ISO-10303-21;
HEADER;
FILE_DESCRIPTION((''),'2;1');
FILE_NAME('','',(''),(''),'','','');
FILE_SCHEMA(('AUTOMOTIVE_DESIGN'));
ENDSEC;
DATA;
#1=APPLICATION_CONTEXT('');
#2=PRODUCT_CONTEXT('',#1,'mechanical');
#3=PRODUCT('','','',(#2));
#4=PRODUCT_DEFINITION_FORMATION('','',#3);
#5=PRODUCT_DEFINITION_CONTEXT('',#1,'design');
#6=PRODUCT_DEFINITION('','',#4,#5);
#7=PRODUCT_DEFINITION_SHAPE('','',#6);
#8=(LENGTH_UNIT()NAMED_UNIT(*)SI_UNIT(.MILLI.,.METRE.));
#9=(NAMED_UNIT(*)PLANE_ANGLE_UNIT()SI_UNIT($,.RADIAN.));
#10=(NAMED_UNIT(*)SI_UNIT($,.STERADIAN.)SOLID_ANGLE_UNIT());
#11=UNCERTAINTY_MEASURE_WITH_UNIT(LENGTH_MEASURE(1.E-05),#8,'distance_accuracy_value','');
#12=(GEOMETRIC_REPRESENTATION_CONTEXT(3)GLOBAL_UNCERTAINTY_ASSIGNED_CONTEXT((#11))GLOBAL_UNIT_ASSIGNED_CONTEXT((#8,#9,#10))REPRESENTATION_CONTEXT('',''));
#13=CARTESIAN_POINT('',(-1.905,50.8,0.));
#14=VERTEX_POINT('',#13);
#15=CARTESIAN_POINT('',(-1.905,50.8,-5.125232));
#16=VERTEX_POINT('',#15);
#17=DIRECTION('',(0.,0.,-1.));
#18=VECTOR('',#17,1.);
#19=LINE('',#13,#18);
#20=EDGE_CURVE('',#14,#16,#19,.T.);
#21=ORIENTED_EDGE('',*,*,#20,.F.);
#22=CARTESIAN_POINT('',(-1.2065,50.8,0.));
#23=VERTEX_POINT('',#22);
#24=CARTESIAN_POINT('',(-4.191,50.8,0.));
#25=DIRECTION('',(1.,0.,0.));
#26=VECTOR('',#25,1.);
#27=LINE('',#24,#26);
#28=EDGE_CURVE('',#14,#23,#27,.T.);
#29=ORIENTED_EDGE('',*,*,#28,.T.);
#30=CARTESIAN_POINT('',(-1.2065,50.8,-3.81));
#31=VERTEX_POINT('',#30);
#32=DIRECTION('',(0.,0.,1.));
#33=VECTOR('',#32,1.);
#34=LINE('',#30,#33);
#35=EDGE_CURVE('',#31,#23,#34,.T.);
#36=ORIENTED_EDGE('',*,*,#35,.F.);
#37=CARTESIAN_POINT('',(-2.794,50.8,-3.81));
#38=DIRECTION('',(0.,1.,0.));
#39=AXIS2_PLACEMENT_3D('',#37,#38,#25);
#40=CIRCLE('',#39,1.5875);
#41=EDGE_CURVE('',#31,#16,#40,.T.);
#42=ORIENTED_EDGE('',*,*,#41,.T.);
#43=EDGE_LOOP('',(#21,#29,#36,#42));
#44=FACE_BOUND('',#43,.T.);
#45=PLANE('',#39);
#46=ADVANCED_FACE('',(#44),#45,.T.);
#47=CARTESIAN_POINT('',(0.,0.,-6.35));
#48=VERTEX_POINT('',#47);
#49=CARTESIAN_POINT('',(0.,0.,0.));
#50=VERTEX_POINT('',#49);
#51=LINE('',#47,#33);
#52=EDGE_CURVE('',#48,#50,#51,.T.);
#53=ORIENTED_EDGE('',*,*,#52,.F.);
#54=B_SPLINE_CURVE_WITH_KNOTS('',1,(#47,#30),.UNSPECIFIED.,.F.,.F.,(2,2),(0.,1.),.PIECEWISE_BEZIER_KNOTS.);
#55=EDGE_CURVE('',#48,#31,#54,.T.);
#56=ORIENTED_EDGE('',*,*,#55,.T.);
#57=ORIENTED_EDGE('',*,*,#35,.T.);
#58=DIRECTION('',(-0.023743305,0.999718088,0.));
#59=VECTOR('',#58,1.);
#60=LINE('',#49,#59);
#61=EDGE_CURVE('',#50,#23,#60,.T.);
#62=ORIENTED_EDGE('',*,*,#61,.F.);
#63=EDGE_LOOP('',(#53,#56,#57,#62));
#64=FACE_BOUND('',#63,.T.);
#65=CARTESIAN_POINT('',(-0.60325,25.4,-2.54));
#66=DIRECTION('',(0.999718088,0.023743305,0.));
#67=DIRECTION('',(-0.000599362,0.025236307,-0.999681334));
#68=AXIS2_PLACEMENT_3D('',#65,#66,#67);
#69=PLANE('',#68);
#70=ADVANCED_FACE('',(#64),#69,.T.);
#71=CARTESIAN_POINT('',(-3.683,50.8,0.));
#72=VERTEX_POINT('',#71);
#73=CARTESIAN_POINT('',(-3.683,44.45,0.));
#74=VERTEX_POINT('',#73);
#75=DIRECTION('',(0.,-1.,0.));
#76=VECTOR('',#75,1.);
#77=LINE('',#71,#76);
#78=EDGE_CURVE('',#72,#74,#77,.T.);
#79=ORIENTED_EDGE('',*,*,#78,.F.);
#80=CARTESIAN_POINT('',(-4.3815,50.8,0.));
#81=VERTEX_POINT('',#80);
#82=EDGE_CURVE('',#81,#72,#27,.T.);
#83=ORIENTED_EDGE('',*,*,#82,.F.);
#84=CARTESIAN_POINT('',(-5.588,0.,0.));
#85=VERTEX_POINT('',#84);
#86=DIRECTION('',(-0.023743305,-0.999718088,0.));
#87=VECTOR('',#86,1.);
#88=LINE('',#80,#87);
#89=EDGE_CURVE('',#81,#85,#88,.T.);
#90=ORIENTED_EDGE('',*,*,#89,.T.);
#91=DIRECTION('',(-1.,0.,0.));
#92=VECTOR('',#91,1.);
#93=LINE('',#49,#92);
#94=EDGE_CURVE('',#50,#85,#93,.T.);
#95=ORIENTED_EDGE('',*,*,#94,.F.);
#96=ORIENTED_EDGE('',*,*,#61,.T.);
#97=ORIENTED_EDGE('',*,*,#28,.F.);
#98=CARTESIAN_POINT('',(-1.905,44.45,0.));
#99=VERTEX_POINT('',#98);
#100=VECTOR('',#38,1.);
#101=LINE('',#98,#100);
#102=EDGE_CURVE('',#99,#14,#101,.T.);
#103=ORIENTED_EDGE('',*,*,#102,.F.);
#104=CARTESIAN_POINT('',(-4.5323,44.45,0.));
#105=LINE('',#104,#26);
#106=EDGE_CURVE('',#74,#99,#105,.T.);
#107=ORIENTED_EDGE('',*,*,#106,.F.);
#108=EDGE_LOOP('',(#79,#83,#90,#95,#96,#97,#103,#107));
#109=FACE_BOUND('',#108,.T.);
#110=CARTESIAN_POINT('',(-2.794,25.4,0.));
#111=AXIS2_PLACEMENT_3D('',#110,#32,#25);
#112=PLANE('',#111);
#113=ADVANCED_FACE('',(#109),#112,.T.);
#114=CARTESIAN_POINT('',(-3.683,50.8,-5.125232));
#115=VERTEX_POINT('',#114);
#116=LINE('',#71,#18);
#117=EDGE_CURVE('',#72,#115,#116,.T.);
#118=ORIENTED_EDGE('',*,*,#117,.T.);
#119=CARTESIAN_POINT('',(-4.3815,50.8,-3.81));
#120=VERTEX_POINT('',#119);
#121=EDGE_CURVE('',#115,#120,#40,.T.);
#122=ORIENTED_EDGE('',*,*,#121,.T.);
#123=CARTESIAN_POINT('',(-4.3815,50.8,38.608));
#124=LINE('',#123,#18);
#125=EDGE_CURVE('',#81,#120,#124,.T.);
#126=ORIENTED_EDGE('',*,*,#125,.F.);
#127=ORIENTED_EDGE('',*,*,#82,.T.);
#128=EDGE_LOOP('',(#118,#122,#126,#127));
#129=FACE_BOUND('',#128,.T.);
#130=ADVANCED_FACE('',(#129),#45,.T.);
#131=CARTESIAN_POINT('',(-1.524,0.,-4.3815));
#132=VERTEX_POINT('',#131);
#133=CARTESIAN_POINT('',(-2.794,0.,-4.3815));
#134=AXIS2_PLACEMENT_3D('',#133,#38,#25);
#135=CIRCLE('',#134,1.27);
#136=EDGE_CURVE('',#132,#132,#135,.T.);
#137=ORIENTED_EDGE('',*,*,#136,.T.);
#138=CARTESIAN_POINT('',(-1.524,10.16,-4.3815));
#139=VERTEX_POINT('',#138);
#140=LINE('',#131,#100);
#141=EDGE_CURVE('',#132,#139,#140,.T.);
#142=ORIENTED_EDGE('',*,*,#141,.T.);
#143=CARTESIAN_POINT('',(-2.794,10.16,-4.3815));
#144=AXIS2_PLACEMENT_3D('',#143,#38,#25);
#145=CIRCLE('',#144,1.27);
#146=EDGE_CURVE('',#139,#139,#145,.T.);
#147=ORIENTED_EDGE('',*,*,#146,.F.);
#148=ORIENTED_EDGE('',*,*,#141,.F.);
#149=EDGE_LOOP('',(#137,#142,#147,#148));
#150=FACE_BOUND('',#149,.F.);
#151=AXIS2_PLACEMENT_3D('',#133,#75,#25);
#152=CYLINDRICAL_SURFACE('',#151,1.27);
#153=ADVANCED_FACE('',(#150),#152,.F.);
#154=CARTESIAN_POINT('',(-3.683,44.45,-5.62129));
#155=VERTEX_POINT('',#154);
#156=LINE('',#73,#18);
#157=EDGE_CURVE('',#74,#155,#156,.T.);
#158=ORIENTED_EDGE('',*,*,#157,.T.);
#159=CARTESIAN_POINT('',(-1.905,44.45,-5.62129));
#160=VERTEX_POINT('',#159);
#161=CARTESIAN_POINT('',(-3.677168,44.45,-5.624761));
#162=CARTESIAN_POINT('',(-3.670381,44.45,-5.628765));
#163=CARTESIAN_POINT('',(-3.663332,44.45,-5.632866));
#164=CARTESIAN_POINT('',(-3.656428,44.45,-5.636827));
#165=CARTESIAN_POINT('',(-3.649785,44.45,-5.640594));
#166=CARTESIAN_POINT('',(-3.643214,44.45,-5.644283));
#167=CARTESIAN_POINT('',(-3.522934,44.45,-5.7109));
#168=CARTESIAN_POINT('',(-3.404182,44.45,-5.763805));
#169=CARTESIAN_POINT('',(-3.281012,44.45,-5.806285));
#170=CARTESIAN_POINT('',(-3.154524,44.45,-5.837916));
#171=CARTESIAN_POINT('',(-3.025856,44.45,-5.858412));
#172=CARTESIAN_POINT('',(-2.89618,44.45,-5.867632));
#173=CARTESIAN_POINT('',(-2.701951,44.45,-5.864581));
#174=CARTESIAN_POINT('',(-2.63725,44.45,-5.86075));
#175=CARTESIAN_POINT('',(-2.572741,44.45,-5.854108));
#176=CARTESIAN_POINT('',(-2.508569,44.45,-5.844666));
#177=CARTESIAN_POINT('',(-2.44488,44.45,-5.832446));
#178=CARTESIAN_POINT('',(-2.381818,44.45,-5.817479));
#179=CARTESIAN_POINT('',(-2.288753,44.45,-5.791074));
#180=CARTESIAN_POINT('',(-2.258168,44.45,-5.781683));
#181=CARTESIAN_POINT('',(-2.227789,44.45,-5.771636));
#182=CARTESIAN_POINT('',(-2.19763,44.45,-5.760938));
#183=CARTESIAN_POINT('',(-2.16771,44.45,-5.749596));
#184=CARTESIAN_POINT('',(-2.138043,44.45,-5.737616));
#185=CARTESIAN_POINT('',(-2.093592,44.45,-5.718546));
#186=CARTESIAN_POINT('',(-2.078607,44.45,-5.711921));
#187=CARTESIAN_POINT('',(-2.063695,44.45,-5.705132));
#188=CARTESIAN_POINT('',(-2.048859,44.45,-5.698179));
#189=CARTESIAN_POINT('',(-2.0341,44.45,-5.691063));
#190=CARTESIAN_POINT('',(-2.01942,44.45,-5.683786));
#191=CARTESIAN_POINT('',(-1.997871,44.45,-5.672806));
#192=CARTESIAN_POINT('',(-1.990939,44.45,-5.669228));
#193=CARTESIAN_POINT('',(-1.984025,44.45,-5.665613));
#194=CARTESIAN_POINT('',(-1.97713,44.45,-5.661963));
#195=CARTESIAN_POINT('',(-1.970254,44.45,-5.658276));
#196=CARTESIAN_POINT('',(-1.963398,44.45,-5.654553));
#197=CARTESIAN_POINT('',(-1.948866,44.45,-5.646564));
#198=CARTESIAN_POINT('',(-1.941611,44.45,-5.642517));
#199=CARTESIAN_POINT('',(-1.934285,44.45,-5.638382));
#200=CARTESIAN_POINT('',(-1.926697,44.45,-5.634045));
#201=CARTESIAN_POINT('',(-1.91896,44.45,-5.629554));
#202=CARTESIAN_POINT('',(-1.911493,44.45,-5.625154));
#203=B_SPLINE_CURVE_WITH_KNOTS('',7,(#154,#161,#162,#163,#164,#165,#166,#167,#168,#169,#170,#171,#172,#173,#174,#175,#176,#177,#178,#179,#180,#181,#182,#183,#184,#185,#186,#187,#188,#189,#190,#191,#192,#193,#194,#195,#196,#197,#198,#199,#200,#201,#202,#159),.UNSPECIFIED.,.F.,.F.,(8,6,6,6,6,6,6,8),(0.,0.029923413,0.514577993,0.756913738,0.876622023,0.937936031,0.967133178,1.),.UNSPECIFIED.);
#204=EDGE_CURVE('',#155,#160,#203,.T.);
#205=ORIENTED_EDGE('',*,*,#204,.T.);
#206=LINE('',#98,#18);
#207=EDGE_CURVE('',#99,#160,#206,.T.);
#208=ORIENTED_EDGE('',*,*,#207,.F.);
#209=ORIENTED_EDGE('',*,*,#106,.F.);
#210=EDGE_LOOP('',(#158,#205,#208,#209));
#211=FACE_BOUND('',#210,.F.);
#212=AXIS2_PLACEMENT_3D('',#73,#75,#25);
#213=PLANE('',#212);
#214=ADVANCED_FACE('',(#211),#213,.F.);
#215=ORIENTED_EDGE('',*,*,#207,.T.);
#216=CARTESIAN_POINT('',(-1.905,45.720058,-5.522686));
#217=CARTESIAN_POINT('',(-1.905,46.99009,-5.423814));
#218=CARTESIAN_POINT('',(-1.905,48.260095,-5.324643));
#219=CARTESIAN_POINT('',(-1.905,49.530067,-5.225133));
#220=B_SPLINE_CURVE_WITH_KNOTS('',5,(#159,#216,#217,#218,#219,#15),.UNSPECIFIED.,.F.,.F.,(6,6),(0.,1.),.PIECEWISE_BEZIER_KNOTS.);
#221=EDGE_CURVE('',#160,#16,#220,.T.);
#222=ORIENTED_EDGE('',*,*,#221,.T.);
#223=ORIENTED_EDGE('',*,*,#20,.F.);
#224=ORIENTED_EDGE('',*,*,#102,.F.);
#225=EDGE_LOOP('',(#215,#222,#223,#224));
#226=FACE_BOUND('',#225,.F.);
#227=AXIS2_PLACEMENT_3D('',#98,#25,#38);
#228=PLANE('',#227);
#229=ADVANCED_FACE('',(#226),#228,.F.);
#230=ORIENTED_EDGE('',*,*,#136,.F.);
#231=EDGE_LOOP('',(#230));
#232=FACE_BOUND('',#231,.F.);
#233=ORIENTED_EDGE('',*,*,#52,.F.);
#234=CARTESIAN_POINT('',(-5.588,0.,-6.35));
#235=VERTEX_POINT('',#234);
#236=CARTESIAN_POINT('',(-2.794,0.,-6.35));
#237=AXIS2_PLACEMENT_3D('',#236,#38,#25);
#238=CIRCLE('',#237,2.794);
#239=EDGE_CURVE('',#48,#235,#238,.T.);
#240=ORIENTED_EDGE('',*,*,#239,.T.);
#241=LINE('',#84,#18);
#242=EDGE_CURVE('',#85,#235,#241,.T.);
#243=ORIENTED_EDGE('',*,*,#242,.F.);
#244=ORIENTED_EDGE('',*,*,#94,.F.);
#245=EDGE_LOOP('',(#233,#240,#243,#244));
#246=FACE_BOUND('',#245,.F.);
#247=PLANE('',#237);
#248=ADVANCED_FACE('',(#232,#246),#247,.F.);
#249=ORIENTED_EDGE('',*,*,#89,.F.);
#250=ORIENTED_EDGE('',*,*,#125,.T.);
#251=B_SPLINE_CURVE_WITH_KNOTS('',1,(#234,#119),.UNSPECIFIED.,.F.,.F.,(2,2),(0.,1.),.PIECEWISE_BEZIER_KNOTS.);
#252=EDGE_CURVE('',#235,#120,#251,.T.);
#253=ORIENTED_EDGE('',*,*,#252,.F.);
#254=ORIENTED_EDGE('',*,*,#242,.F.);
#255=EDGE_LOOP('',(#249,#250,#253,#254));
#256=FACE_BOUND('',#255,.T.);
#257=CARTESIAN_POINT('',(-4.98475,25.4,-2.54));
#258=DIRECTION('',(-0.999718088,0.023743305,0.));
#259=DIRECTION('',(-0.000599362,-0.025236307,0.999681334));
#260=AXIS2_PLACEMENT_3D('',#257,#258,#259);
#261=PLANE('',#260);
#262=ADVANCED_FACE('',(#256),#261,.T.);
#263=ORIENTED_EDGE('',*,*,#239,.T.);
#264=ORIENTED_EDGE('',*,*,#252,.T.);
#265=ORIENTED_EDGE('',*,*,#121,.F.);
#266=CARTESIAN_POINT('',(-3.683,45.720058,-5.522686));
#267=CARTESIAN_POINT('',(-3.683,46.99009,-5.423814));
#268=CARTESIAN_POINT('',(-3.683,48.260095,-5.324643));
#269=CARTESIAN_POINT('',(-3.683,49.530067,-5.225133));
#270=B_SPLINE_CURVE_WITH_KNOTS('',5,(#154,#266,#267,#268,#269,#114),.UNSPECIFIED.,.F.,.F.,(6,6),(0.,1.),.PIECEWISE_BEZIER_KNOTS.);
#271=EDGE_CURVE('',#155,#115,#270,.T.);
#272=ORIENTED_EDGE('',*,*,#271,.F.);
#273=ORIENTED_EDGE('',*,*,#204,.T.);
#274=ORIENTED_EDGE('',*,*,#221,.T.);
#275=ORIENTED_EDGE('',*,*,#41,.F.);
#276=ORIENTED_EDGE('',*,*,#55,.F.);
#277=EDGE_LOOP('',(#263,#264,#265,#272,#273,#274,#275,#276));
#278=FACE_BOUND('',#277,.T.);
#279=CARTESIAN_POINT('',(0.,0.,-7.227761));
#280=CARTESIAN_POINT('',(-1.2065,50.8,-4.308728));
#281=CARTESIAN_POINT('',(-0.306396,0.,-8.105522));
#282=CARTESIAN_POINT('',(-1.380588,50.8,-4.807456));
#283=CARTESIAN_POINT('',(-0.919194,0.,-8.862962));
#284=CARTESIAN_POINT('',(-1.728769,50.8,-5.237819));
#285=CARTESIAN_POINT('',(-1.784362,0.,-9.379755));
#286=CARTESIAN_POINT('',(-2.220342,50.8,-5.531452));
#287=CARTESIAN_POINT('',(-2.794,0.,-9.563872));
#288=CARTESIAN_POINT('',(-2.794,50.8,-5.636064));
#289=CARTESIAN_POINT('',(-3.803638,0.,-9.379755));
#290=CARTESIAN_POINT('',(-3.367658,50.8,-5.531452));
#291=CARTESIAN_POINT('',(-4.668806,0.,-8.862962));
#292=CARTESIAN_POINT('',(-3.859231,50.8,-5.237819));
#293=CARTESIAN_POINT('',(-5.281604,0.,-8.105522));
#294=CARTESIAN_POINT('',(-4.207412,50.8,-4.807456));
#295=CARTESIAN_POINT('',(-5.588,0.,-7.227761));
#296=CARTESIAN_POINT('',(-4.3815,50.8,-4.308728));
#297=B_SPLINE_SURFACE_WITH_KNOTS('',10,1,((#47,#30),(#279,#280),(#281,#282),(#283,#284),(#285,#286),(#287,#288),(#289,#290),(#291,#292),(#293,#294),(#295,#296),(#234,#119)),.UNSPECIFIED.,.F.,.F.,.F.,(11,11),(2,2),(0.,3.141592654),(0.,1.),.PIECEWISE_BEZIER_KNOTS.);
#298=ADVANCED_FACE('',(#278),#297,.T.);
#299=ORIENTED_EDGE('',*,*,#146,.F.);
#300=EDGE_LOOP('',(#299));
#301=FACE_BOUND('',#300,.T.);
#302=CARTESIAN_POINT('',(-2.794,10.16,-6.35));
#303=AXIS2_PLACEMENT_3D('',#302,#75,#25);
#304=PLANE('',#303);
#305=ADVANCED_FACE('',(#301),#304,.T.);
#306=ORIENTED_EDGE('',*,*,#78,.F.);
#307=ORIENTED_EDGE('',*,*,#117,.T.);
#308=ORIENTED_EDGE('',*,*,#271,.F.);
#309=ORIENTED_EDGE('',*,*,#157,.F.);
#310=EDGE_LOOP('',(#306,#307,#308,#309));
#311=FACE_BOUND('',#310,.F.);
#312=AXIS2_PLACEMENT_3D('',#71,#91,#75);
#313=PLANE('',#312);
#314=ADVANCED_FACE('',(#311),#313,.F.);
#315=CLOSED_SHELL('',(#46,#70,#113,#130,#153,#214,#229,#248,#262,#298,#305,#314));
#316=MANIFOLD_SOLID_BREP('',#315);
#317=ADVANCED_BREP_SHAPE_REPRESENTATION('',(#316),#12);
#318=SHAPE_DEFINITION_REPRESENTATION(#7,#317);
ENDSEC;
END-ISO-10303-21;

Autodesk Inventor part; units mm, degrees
ref_plane "YZ Plane" through (0, 0, 0) normal (1, 0, 0) x (0, 1, 0)
ref_plane "XY Plane" through (0, 0, 0) normal (0, 0, 1) x (1, 0, 0)
sketch "Sketch6" plane through (0, 0, 0) normal (0, 1, 0) x (-1, 0, 0)
  line L0 (0, 0) -> (5.588, 0)
  line L1 (5.588, 0) -> (5.588, -6.35)
  line L2 (5.588, -6.35) -> (0, -6.35)
  line L3 (0, -6.35) -> (0, 0)
  arc A0 (0, -6.35) -> (5.588, -6.35) centre (2.794, -6.35) ccw
  dimension "d25" = 5.588
  dimension "d26" = 6.35
ref_plane "Work Plane1" through (0, 50.8, 0) normal (0, 1, 0) x (-1, 0, 0)
sketch "Sketch8" plane through (0, 50.8, 0) normal (0, 1, 0) x (-1, 0, 0)
  line L0 (4.3815, 0) -> (1.2065, 0)
  line L1 (1.2065, 0) -> (1.2065, -3.81)
  line L2 (1.2065, -3.81) -> (4.3815, -3.81)
  line L3 (4.3815, -3.81) -> (4.3815, 0)
  arc A0 (1.2065, -3.81) -> (4.3815, -3.81) centre (2.794, -3.81) ccw
  point P0 (0, 0)
  dimension "d27" = 3.175
  dimension "d28" = 3.81
  dimension "d49" = 1.2065
loft "Loft1" add profiles "Sketch6", "Sketch8"
sketch "Sketch9" plane through (-5.588, 0, 0) normal (0, 0, 1) x (1, 0, 0)
  line L0 (0, 0) -> (5.588, 0) projected
  line L1 (5.588, 0) -> (4.3815, 50.8) projected
  line L2 (1.2065, 50.8) -> (4.3815, 50.8) projected
  line L3 (0, 0) -> (1.2065, 50.8) projected
  line L4 (4.3815, 50.8) -> (5.588, 0) projected
  line L5 (4.5323, 44.45) -> (1.0557, 44.45)
  line L6 (0, 0) -> (1.2065, 50.8) projected
  dimension "d34" = 6.35
extrude "Extrusion5" add sketch "Sketch9" along normal blind 38.608 contours L3 L2 L1 L5
sketch "Sketch12" plane through (-2.794, 0, -6.35) normal (0, -1, 0) x (1, 0, 0)
  circle A0 centre (0, 1.9685) radius 1.27
  arc A1 (-2.794, 0) -> (2.794, 0) centre (0, 0) ccw projected
  line L0 (0, -2.794) -> (0, 1.9685)
  point P0 (2.794, 6.35)
  dimension "d44" = 2.54
  dimension "d46" = 4.7625
extrude "Extrusion8" cut sketch "Sketch12" against normal blind 10.16
sketch "Sketch13" plane through (-5.588, 0, 0) normal (0, 0, 1) x (1, 0, 0)
  line L0 (4.3815, 50.8) -> (1.2065, 50.8) projected
  line L1 (1.2065, 50.8) -> (4.3815, 50.8) projected
  line L2 (1.0557, 44.45) -> (4.5323, 44.45) projected
  line L3 (3.683, 50.8) -> (1.905, 50.8)
  line L4 (1.905, 50.8) -> (1.905, 44.45)
  line L5 (1.905, 44.45) -> (3.683, 44.45)
  line L6 (3.683, 44.45) -> (3.683, 50.8)
  line L7 (3.683, 50.8) -> (4.3815, 50.8) construction
  line L8 (0, 0) -> (1.2065, 50.8) construction
  line L9 (1.905, 50.8) -> (1.2065, 50.8) construction
  line L10 (6.4775, 53.5114) -> (-2.6174, 53.5114)
  line L11 (-2.6174, 53.5114) -> (-2.6174, 42.707)
  line L12 (-2.6174, 42.707) -> (6.4775, 42.707)
  line L13 (6.4775, 42.707) -> (6.4775, 53.5114)
  point P0 (5.588, 0)
  dimension "d50" = 1.778
extrude "Extrusion9" cut sketch "Sketch13" against normal through all contours L6 L2 L4 L0
extrude "Extrusion10" cut sketch "Sketch13" along normal through all contours L6 L2 L4 L0 | L13 L12 L11 L10
properties part number "RudderStabilizingFins_Print1"
